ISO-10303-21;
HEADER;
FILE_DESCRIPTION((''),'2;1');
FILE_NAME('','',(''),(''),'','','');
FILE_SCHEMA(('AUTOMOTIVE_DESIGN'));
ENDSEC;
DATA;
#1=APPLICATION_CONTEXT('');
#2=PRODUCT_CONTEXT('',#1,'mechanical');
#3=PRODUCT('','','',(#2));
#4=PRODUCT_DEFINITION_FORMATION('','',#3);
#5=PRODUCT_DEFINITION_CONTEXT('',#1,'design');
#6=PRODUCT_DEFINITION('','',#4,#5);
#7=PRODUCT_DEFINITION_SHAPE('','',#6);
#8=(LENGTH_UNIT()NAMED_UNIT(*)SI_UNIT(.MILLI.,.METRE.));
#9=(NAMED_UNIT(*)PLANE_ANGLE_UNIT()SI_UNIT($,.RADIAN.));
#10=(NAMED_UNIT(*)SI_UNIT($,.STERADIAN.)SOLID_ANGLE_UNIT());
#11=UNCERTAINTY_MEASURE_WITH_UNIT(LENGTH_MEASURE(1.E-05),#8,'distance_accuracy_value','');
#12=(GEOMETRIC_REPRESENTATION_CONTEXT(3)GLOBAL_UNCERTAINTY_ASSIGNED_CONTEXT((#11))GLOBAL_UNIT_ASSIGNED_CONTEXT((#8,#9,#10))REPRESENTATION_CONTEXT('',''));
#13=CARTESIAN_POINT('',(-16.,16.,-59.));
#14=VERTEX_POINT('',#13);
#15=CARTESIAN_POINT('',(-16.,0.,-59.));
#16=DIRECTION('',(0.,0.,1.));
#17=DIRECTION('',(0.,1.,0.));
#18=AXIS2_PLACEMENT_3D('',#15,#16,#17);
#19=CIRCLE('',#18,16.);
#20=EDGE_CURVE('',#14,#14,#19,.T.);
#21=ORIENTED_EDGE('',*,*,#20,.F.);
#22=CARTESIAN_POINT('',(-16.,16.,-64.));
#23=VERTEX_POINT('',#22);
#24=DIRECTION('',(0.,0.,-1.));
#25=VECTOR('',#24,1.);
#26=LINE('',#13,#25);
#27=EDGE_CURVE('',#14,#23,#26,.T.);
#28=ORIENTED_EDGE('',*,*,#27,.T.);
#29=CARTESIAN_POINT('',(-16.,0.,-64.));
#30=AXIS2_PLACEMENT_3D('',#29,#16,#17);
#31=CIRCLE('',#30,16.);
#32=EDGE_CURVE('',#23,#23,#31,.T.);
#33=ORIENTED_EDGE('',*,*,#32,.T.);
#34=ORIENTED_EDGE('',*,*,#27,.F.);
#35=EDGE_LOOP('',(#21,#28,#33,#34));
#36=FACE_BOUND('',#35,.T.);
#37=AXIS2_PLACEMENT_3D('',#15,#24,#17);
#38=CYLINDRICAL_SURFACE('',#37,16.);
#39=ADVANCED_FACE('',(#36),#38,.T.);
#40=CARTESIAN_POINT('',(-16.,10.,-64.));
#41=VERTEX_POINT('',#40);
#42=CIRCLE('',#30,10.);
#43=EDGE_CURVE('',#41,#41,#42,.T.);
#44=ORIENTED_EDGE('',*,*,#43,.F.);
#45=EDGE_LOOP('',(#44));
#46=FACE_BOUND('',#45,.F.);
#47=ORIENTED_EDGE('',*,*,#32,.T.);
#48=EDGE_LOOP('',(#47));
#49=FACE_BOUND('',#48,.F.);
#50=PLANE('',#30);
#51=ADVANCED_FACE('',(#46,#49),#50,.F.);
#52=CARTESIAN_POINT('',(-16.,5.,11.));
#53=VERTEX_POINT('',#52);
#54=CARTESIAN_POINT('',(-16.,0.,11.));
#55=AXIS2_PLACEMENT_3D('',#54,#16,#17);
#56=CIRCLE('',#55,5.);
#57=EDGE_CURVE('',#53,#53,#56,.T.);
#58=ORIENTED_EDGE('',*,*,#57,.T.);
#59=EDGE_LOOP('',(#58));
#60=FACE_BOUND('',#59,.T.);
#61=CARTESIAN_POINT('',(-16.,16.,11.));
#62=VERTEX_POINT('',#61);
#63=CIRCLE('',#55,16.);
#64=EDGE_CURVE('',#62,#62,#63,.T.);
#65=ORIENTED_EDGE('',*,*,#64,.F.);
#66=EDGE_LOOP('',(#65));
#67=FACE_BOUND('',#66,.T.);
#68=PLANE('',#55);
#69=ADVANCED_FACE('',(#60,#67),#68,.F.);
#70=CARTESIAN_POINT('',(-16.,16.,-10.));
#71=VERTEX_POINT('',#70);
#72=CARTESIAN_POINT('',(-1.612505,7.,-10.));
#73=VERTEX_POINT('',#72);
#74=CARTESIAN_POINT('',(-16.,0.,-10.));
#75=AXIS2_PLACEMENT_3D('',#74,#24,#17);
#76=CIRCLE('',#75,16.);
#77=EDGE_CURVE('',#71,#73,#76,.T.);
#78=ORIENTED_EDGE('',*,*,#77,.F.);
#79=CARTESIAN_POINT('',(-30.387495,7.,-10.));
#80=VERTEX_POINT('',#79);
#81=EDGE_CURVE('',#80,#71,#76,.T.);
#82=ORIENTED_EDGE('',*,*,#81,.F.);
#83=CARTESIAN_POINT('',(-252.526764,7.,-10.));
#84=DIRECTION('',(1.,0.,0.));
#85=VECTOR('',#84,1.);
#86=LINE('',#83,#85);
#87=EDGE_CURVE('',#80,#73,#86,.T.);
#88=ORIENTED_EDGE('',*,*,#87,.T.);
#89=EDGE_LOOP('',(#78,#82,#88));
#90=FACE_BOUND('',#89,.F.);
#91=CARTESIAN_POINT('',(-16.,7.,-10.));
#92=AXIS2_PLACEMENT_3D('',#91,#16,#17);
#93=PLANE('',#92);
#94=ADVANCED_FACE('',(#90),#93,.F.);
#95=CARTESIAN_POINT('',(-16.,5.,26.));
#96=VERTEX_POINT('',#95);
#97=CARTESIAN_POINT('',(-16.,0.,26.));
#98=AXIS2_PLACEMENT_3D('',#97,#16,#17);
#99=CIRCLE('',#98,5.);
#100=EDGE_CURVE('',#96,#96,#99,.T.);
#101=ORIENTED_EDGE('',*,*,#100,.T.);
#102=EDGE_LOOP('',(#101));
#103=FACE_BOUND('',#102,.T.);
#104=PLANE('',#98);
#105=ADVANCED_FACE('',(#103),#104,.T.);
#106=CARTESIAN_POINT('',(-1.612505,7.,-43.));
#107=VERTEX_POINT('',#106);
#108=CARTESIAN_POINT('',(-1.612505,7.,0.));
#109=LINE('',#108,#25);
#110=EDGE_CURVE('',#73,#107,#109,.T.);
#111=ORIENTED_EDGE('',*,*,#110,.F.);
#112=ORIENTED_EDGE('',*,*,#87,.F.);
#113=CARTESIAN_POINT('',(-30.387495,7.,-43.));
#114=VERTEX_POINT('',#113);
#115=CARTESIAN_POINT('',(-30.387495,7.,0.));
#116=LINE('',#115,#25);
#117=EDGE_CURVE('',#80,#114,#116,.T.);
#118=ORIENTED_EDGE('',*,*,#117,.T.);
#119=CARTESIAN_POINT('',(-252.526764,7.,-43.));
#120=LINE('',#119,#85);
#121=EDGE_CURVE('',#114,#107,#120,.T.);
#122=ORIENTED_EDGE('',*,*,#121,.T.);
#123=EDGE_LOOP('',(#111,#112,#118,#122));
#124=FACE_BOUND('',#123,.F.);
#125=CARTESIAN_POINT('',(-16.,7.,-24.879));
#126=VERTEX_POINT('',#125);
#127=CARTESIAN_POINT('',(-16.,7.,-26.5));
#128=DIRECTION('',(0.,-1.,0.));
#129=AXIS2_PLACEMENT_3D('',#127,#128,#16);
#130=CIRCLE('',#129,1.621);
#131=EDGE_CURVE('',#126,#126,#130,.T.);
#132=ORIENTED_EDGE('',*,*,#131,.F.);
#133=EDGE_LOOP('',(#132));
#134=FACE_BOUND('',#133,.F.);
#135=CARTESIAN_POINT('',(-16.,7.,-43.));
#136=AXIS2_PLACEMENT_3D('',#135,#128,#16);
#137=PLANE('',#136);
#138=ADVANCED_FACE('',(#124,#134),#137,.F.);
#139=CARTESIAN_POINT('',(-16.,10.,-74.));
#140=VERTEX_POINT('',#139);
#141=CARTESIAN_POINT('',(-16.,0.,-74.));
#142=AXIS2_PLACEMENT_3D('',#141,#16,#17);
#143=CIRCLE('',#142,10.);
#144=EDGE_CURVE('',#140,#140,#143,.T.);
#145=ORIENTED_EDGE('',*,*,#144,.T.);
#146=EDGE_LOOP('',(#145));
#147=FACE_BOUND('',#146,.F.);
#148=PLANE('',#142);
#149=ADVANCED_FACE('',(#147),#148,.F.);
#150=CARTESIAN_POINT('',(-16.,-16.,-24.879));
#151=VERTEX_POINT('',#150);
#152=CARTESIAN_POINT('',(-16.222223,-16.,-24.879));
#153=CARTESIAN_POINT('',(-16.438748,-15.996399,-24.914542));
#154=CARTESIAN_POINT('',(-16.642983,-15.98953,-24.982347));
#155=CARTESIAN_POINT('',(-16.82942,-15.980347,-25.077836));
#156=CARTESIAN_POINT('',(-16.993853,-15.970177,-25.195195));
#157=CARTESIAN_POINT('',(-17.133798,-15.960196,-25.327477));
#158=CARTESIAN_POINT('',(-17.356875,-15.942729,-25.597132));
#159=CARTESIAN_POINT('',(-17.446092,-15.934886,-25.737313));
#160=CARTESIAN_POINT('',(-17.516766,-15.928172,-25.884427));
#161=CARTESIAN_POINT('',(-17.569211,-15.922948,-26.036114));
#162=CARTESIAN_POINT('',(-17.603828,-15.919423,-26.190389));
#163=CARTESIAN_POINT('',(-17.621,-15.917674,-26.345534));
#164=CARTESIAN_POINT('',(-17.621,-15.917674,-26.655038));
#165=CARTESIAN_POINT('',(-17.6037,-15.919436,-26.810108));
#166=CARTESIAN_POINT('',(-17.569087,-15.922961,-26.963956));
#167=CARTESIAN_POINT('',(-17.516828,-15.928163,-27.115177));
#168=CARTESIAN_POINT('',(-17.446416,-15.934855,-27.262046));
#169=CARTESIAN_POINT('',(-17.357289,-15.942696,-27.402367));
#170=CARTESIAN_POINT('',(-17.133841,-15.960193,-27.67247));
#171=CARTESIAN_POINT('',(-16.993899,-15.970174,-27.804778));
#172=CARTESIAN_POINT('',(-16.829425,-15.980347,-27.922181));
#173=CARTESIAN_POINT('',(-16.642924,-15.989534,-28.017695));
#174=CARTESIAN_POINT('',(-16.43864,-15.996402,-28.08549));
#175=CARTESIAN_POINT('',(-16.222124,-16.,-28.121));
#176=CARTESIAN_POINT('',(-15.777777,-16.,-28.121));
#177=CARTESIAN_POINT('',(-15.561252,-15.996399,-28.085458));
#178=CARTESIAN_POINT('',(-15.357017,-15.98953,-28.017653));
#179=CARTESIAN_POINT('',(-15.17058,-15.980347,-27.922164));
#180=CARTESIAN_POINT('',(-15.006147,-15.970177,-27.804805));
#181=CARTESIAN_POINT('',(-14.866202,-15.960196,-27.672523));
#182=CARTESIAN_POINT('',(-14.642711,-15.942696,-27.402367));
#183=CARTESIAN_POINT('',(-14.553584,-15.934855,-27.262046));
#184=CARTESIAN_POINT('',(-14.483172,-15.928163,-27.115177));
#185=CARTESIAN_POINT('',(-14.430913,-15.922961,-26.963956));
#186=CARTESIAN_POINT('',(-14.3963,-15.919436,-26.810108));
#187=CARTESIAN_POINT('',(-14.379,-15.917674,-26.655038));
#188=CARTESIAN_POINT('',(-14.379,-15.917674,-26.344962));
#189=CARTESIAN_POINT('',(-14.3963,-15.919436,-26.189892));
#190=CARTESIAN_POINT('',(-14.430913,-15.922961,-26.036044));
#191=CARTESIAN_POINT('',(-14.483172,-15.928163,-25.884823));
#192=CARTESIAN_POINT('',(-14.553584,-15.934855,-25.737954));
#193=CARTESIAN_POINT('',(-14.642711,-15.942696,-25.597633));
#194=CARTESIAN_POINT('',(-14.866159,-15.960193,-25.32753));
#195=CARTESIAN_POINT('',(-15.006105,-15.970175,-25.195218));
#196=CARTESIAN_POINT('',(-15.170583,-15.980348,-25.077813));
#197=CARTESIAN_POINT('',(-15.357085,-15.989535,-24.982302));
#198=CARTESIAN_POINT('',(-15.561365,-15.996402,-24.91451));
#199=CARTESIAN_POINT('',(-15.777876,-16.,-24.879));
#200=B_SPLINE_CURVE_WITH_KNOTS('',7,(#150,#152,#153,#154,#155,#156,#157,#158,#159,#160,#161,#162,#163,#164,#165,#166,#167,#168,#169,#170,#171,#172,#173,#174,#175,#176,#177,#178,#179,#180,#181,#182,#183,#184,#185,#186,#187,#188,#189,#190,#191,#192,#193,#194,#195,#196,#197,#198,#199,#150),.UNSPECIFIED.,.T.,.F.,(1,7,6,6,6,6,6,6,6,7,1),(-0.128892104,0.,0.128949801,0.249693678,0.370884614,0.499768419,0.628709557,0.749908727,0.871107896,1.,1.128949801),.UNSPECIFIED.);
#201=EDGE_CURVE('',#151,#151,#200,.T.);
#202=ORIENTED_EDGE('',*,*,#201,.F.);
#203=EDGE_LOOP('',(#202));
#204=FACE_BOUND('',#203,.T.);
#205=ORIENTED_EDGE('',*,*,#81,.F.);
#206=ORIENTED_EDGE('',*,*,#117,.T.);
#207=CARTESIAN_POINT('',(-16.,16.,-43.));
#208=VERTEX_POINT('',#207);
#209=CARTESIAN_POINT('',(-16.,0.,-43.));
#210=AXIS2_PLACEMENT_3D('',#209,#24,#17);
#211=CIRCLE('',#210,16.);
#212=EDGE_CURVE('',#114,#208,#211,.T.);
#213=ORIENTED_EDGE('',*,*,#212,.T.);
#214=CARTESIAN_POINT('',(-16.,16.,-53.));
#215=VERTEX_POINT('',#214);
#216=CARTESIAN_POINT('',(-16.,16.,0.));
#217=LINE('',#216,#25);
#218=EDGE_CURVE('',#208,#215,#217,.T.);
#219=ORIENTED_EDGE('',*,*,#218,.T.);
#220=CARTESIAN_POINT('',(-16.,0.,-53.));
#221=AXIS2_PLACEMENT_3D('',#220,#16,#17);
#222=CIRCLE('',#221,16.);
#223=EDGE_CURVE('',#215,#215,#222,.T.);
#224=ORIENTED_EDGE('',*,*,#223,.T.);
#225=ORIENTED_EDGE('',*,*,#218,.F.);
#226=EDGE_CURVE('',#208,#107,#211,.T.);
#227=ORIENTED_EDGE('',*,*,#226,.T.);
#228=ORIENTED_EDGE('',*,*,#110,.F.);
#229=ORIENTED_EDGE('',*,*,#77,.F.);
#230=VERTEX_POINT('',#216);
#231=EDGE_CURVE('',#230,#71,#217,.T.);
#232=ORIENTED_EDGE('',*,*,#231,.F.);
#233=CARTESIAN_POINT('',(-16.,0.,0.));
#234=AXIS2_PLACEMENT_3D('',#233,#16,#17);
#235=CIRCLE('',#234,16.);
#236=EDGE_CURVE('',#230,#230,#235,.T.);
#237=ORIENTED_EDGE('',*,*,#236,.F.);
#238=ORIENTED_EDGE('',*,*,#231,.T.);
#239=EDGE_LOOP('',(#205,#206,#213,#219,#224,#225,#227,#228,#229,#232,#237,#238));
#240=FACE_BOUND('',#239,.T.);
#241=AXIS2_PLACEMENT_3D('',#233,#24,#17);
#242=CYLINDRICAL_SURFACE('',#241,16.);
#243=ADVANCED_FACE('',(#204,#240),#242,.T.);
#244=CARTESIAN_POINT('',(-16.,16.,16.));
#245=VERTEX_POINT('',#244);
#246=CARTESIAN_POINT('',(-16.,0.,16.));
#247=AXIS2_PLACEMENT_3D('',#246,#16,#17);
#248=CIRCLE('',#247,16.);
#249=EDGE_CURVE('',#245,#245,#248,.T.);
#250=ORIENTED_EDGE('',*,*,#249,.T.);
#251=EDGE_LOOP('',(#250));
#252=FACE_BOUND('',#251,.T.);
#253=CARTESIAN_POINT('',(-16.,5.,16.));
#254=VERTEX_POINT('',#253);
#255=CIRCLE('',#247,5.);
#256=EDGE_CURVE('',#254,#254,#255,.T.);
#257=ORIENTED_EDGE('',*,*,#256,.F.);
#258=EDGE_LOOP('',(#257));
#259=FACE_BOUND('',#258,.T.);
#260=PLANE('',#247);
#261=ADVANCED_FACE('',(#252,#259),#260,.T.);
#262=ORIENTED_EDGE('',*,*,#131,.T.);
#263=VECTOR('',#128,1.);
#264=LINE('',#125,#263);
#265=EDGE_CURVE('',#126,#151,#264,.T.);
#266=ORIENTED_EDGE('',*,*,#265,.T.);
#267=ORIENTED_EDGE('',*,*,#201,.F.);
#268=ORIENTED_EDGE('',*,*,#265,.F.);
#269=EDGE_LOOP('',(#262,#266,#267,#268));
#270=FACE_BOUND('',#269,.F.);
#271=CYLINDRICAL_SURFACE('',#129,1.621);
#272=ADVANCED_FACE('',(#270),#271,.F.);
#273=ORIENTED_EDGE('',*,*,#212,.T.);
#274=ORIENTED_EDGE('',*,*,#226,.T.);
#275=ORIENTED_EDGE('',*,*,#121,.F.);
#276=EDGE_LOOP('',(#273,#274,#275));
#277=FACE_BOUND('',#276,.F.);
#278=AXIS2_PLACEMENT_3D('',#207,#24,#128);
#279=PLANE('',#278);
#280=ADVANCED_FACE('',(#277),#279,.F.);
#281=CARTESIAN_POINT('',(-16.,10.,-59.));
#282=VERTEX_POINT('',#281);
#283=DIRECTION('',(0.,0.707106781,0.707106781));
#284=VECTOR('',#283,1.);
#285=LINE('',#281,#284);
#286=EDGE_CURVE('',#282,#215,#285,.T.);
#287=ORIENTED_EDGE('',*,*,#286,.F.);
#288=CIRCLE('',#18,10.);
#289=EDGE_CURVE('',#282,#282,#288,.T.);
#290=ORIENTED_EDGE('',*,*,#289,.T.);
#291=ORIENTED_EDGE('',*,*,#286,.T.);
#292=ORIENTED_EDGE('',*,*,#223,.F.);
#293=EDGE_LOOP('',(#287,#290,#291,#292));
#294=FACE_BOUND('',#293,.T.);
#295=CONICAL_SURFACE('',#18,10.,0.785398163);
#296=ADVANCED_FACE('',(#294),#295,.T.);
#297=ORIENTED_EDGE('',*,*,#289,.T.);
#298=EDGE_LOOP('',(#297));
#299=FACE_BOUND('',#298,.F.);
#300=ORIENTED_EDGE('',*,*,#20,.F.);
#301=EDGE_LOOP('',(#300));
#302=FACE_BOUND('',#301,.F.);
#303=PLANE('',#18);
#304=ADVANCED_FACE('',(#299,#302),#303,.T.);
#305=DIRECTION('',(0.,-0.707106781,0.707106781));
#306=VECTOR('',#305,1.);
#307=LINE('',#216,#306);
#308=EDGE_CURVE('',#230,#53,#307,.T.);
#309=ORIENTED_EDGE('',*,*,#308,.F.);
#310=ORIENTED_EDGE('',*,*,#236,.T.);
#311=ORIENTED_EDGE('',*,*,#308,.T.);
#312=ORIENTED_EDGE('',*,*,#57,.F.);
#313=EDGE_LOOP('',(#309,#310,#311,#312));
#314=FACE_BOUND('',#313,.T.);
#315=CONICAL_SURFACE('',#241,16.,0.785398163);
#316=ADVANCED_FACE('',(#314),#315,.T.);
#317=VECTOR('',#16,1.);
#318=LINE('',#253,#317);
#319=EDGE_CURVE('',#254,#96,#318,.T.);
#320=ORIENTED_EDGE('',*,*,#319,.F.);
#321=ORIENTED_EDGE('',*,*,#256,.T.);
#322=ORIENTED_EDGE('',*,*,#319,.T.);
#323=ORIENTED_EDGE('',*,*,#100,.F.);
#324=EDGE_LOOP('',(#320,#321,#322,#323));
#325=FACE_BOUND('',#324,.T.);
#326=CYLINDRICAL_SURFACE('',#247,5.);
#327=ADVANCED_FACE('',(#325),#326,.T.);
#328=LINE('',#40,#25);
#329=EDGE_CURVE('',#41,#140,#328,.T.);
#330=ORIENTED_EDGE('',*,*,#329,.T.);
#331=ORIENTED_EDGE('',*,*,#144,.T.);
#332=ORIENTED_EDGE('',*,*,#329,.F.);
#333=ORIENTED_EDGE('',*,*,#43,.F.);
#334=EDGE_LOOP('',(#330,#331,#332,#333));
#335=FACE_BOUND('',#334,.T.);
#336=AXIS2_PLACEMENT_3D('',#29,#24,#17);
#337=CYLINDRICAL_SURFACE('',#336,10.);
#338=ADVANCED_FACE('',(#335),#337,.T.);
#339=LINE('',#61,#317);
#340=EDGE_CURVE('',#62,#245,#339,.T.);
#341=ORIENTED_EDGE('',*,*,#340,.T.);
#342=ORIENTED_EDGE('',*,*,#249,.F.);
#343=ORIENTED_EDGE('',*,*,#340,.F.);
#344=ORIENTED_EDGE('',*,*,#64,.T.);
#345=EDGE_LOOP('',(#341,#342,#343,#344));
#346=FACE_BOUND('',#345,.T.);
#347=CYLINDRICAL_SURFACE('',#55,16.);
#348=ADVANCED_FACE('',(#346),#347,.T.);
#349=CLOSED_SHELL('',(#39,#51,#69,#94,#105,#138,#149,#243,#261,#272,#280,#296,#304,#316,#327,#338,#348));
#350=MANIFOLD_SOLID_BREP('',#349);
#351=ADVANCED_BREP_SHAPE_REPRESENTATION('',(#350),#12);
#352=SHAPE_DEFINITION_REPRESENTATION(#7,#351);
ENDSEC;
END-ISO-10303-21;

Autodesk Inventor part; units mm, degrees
ref_plane "YZ Plane" through (0, 0, 0) normal (1, 0, 0) x (0, 1, 0)
ref_plane "XZ Plane" through (0, 0, 0) normal (0, 1, 0) x (-1, 0, 0)
ref_plane "XY Plane" through (0, 0, 0) normal (0, 0, 1) x (1, 0, 0)
sketch "Sketch2" plane through (0, 0, 0) normal (1, 0, 0) x (0, 1, 0)
  line L0 (0, 0) -> (7, 0)
  line L1 (0, 0) -> (16, 0)
  line L2 (10, -64) -> (10, -74)
  line L3 (10, -74) -> (0, -74)
  line L4 (0, -74) -> (0, -64)
  line L5 (0, 0) -> (16, 0)
  line L6 (0, 0) -> (16, 0)
  line L7 (16, 0) -> (16, 0)
  line L8 (5, 11) -> (0, 11)
  line L9 (0, 11) -> (0, 0)
  line L10 (0, 11) -> (16, 11)
  line L11 (16, 11) -> (16, 16)
  line L12 (16, 16) -> (0, 16)
  line L13 (0, 16) -> (0, 11)
  line L14 (16, 0) -> (5, 11)
  line L15 (0, 0) -> (16, 0)
  line L16 (16, 0) -> (16, -53)
  line L17 (10, -59) -> (0, -59)
  line L18 (0, -59) -> (0, 0)
  line L19 (0, -59) -> (16, -59)
  line L20 (16, -59) -> (16, -64)
  line L21 (16, -64) -> (0, -64)
  line L22 (0, -64) -> (0, -59)
  line L23 (10, -59) -> (16, -53)
  line L24 (0, 16) -> (5, 16)
  line L25 (5, 16) -> (5, 26)
  line L26 (5, 26) -> (0, 26)
  line L27 (0, 26) -> (0, 16)
  point P0 (8, -64)
  point P1 (8, 0)
  point P2 (8, 11)
  point P3 (8, 16)
  point P4 (5, -59)
  point P5 (5, -74)
  dimension "d7" = 10
  dimension "d14" = 16
  dimension "d15" = 11
  dimension "d18" = 16
  dimension "d19" = 59
  dimension "d24" = 5
  dimension "d26" = 5
  dimension "d27" = 10
  dimension "d45" = 53
  dimension "d46" = 5
  dimension "d47" = 10
revolve "Revolution1" add sketch "Sketch2" angle 360 about axis through (0, 0, -59) along (0, 0, 1)
sketch "Sketch5" plane through (0, 0, 0) normal (1, 0, 0) x (0, 1, 0)
  line L0 (7, -10) -> (16, -10)
  line L1 (16, -10) -> (16, -43)
  line L2 (16, -43) -> (7, -43)
  line L3 (7, -43) -> (7, -10)
  point P0 (0, 0)
  point P1 (11.5, -10)
  dimension "d28" = 9
  dimension "d29" = 33
  dimension "d30" = 10
  dimension "d31" = 7
extrude "Extrusion1" cut sketch "Sketch5" along normal through all both and the other way through all
sketch "Sketch6" plane through (-14.3875, 7, -10) normal (0, 1, 0) x (1, 0, 0)
  line L0 (0, 0) -> (0, 33) projected
  line L1 (0, 0) -> (28.775, 0) projected
  line L2 (28.775, 33) -> (28.775, 0) projected
  line L3 (28.775, 33) -> (0, 33) projected
  circle A0 centre (14.3875, 16.5) radius 2
  point P0 (14.3875, -10)
  dimension "d34" = 4
hole "Hole1" at (0, 7, -26.5) direction (0, -1, 0) diameter 3.242 end through all thread size "M4x0.7" class "6H" standard "ISO Metric profile"
move or copy body "Move Body1" bodies to move or copy 1 copy no translate (-16, 0, 0)
properties material "Aluminum 6061"
